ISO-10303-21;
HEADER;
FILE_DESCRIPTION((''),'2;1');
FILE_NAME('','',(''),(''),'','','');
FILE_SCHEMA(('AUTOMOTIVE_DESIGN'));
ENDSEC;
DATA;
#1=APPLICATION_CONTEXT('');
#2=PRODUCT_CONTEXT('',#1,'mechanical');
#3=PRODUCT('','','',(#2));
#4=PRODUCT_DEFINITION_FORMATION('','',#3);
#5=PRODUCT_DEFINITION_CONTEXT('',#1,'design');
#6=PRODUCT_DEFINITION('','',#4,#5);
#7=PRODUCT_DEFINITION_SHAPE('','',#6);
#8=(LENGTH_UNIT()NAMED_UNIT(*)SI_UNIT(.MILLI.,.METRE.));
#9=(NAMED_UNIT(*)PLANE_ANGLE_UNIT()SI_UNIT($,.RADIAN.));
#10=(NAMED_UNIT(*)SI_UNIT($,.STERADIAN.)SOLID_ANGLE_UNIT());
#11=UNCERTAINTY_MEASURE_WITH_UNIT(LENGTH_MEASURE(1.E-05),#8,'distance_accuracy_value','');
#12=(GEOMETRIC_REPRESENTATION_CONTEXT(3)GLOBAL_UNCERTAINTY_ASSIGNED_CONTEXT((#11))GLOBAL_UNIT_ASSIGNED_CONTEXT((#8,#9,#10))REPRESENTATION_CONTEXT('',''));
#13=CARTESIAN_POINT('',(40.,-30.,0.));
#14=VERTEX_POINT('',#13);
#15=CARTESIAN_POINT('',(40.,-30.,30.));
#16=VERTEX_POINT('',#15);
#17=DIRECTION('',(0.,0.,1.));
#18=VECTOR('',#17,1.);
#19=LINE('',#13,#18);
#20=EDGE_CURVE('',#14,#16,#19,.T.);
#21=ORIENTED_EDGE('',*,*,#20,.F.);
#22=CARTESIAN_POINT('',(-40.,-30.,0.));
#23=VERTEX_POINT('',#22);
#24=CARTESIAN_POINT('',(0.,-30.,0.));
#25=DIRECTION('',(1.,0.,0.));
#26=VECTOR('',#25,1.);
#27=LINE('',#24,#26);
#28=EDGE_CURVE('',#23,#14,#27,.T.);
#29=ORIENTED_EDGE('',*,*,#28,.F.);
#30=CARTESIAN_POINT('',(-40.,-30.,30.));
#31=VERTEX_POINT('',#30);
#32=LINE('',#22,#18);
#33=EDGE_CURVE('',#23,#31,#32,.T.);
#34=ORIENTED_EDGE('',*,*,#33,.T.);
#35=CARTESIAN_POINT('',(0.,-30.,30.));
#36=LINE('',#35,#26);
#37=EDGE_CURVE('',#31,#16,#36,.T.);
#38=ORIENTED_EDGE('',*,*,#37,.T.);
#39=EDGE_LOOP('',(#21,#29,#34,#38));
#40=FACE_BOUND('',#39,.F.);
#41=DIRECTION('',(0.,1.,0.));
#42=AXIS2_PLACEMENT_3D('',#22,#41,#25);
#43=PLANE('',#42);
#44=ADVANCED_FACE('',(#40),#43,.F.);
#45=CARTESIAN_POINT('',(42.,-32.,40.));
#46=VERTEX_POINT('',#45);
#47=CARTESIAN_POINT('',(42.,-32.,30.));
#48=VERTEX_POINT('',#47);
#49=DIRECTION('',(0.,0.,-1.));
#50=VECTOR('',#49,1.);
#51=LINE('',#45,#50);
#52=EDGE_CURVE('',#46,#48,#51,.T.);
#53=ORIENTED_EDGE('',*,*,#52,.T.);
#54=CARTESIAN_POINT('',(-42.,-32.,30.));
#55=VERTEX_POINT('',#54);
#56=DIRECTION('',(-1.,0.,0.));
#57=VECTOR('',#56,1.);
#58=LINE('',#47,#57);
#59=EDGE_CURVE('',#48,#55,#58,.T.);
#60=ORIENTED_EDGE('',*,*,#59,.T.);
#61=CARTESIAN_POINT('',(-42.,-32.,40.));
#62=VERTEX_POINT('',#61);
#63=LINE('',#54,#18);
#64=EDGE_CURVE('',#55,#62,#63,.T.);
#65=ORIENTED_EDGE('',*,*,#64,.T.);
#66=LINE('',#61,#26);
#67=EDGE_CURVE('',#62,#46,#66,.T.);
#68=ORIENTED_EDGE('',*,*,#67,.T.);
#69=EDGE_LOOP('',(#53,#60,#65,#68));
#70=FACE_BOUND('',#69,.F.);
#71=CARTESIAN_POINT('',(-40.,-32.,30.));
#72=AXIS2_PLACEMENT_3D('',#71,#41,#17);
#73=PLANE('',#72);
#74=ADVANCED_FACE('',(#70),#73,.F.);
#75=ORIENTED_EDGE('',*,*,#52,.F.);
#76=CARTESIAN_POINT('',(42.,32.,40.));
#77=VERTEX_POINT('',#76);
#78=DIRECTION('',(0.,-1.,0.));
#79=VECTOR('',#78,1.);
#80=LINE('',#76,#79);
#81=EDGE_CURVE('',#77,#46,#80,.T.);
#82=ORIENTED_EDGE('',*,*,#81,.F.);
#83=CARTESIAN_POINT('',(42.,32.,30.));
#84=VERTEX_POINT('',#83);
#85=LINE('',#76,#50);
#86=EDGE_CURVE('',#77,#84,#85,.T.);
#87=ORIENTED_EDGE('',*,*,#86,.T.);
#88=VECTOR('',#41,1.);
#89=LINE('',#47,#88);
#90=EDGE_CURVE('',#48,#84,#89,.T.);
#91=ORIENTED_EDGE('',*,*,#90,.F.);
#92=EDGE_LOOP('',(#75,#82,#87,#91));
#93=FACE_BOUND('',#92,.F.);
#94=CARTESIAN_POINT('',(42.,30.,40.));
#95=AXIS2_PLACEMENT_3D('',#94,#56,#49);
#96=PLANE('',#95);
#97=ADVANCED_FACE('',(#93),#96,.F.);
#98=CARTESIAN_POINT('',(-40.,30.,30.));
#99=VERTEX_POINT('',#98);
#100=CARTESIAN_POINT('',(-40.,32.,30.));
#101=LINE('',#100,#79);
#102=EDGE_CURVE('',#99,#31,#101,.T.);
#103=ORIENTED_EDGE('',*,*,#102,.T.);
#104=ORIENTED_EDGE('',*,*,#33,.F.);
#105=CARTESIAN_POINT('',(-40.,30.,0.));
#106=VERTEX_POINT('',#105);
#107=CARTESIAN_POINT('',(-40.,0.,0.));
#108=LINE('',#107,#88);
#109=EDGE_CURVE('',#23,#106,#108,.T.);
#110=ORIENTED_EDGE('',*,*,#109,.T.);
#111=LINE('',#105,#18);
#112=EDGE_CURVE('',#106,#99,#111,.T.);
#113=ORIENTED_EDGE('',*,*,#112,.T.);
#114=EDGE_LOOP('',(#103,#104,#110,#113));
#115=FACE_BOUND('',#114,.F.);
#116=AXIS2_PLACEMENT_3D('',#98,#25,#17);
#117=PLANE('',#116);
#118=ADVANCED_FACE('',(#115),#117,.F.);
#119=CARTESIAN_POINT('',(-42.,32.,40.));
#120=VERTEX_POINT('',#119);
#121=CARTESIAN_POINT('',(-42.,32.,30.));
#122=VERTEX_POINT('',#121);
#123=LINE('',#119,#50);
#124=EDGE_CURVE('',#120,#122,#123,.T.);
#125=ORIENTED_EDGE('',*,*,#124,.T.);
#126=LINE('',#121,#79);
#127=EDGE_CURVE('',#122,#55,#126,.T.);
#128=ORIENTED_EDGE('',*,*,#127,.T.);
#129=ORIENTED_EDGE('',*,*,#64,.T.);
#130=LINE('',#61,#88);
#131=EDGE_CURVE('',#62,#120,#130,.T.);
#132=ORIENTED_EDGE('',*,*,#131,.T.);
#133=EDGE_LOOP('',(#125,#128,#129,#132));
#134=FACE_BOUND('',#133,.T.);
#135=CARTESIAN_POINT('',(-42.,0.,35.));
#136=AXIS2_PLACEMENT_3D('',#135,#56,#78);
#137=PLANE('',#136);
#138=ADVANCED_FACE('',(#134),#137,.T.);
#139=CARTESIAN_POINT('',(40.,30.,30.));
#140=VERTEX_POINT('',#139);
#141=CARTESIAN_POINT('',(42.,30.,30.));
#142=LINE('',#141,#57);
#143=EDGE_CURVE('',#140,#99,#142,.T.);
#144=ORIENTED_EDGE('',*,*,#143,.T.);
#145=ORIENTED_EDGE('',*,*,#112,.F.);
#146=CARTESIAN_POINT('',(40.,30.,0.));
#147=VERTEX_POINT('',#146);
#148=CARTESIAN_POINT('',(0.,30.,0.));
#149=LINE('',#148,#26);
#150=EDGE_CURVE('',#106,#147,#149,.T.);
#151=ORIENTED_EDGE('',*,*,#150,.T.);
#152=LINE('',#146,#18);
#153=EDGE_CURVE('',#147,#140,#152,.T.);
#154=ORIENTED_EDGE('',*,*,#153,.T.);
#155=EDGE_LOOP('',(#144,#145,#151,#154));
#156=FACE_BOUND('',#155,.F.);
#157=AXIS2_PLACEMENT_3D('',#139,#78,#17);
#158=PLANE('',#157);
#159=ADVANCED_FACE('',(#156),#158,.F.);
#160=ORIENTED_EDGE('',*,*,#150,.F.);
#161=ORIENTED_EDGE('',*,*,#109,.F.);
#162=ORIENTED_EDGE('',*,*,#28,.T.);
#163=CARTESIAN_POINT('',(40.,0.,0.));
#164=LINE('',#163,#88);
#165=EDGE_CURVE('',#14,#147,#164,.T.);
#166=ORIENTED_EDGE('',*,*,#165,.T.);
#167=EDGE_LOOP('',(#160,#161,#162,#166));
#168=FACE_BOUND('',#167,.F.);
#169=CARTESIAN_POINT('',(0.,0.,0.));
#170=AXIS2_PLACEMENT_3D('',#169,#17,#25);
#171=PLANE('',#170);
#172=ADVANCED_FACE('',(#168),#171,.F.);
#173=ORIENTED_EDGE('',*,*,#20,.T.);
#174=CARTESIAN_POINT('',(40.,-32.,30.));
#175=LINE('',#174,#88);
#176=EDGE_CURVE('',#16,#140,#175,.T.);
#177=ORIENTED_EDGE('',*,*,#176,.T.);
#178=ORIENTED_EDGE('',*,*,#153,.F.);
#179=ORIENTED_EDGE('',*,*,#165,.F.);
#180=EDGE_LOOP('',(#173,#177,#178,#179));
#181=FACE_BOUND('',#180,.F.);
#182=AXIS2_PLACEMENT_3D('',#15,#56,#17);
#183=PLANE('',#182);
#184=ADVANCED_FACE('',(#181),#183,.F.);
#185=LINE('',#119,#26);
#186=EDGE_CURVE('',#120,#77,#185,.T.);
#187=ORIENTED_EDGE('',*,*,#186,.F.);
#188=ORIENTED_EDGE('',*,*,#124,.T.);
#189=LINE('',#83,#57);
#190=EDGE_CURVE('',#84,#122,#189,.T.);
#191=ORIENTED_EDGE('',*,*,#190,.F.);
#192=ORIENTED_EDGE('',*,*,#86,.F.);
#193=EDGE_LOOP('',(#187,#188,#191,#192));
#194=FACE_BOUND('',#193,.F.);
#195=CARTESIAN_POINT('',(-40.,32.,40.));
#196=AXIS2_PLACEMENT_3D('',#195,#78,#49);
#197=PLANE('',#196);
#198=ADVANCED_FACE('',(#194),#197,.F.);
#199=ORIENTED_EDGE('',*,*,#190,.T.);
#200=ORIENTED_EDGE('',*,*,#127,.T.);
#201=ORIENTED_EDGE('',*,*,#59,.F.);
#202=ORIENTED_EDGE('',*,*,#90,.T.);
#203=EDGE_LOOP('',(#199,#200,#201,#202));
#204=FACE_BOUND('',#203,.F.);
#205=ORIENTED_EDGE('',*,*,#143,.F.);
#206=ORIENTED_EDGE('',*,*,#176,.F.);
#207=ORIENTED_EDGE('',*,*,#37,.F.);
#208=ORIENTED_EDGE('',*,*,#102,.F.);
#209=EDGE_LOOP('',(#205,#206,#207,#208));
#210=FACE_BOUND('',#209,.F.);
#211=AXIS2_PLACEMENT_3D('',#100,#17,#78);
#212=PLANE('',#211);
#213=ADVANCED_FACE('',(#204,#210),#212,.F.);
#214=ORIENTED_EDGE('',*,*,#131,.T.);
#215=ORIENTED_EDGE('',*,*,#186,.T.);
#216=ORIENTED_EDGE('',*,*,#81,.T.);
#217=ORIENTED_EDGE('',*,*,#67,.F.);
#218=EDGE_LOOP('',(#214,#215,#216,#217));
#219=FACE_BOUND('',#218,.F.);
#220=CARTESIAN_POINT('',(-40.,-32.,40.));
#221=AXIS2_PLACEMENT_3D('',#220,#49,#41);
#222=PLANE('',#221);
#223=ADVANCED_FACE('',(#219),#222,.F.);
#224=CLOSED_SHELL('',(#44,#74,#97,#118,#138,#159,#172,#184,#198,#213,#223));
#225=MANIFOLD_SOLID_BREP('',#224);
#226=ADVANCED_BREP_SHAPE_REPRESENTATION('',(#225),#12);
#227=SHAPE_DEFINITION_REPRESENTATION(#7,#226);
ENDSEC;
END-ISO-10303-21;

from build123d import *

# Parameters (mm, degrees)
F0_W     = 80
F0_H     = 60
F1_DEPTH = 40
F2_W     = 80
F2_H     = 10
F3_DEPTH = 2
F5_DEPTH = 2
F7_DEPTH = 2
F9_DEPTH = 2


with BuildPart() as f1:
    # F0 (on Top) → F1 (new body)
    with BuildSketch(Plane.XY):
        Rectangle(F0_W, F0_H)
    extrude(amount=F1_DEPTH)

    # F2 (on face) → F3 (join)
    with BuildSketch(Plane.XZ.offset(30)):
        with Locations((0, 35)):
            Rectangle(F2_W, F2_H)
    extrude(amount=F3_DEPTH)

    # F4 (on face) → F5 (join)
    with BuildSketch(Plane.YZ.offset(40)):
        Polygon((-32, 40), (-32, 30), (-30, 30), (30, 30), (30, 40), align=None)
    extrude(amount=F5_DEPTH)

    # F6 (on face) → F7 (join)
    with BuildSketch(Plane(origin=(0, 30, 0), x_dir=(-1, 0, 0), z_dir=(0, 1, 0))):
        Polygon((-42, 40), (-42, 30), (-40, 30), (40, 30), (40, 40), align=None)
    extrude(amount=F7_DEPTH)

    # F8 (on face) → F9 (join)
    with BuildSketch(Plane(origin=(-40, 0, 0), x_dir=(0, -1, 0), z_dir=(-1, 0, 0))):
        Polygon((-32, 40), (-32, 30), (-30, 30), (30, 30), (32, 30), (32, 40), align=None)
    extrude(amount=F9_DEPTH)


solid = f1.part
